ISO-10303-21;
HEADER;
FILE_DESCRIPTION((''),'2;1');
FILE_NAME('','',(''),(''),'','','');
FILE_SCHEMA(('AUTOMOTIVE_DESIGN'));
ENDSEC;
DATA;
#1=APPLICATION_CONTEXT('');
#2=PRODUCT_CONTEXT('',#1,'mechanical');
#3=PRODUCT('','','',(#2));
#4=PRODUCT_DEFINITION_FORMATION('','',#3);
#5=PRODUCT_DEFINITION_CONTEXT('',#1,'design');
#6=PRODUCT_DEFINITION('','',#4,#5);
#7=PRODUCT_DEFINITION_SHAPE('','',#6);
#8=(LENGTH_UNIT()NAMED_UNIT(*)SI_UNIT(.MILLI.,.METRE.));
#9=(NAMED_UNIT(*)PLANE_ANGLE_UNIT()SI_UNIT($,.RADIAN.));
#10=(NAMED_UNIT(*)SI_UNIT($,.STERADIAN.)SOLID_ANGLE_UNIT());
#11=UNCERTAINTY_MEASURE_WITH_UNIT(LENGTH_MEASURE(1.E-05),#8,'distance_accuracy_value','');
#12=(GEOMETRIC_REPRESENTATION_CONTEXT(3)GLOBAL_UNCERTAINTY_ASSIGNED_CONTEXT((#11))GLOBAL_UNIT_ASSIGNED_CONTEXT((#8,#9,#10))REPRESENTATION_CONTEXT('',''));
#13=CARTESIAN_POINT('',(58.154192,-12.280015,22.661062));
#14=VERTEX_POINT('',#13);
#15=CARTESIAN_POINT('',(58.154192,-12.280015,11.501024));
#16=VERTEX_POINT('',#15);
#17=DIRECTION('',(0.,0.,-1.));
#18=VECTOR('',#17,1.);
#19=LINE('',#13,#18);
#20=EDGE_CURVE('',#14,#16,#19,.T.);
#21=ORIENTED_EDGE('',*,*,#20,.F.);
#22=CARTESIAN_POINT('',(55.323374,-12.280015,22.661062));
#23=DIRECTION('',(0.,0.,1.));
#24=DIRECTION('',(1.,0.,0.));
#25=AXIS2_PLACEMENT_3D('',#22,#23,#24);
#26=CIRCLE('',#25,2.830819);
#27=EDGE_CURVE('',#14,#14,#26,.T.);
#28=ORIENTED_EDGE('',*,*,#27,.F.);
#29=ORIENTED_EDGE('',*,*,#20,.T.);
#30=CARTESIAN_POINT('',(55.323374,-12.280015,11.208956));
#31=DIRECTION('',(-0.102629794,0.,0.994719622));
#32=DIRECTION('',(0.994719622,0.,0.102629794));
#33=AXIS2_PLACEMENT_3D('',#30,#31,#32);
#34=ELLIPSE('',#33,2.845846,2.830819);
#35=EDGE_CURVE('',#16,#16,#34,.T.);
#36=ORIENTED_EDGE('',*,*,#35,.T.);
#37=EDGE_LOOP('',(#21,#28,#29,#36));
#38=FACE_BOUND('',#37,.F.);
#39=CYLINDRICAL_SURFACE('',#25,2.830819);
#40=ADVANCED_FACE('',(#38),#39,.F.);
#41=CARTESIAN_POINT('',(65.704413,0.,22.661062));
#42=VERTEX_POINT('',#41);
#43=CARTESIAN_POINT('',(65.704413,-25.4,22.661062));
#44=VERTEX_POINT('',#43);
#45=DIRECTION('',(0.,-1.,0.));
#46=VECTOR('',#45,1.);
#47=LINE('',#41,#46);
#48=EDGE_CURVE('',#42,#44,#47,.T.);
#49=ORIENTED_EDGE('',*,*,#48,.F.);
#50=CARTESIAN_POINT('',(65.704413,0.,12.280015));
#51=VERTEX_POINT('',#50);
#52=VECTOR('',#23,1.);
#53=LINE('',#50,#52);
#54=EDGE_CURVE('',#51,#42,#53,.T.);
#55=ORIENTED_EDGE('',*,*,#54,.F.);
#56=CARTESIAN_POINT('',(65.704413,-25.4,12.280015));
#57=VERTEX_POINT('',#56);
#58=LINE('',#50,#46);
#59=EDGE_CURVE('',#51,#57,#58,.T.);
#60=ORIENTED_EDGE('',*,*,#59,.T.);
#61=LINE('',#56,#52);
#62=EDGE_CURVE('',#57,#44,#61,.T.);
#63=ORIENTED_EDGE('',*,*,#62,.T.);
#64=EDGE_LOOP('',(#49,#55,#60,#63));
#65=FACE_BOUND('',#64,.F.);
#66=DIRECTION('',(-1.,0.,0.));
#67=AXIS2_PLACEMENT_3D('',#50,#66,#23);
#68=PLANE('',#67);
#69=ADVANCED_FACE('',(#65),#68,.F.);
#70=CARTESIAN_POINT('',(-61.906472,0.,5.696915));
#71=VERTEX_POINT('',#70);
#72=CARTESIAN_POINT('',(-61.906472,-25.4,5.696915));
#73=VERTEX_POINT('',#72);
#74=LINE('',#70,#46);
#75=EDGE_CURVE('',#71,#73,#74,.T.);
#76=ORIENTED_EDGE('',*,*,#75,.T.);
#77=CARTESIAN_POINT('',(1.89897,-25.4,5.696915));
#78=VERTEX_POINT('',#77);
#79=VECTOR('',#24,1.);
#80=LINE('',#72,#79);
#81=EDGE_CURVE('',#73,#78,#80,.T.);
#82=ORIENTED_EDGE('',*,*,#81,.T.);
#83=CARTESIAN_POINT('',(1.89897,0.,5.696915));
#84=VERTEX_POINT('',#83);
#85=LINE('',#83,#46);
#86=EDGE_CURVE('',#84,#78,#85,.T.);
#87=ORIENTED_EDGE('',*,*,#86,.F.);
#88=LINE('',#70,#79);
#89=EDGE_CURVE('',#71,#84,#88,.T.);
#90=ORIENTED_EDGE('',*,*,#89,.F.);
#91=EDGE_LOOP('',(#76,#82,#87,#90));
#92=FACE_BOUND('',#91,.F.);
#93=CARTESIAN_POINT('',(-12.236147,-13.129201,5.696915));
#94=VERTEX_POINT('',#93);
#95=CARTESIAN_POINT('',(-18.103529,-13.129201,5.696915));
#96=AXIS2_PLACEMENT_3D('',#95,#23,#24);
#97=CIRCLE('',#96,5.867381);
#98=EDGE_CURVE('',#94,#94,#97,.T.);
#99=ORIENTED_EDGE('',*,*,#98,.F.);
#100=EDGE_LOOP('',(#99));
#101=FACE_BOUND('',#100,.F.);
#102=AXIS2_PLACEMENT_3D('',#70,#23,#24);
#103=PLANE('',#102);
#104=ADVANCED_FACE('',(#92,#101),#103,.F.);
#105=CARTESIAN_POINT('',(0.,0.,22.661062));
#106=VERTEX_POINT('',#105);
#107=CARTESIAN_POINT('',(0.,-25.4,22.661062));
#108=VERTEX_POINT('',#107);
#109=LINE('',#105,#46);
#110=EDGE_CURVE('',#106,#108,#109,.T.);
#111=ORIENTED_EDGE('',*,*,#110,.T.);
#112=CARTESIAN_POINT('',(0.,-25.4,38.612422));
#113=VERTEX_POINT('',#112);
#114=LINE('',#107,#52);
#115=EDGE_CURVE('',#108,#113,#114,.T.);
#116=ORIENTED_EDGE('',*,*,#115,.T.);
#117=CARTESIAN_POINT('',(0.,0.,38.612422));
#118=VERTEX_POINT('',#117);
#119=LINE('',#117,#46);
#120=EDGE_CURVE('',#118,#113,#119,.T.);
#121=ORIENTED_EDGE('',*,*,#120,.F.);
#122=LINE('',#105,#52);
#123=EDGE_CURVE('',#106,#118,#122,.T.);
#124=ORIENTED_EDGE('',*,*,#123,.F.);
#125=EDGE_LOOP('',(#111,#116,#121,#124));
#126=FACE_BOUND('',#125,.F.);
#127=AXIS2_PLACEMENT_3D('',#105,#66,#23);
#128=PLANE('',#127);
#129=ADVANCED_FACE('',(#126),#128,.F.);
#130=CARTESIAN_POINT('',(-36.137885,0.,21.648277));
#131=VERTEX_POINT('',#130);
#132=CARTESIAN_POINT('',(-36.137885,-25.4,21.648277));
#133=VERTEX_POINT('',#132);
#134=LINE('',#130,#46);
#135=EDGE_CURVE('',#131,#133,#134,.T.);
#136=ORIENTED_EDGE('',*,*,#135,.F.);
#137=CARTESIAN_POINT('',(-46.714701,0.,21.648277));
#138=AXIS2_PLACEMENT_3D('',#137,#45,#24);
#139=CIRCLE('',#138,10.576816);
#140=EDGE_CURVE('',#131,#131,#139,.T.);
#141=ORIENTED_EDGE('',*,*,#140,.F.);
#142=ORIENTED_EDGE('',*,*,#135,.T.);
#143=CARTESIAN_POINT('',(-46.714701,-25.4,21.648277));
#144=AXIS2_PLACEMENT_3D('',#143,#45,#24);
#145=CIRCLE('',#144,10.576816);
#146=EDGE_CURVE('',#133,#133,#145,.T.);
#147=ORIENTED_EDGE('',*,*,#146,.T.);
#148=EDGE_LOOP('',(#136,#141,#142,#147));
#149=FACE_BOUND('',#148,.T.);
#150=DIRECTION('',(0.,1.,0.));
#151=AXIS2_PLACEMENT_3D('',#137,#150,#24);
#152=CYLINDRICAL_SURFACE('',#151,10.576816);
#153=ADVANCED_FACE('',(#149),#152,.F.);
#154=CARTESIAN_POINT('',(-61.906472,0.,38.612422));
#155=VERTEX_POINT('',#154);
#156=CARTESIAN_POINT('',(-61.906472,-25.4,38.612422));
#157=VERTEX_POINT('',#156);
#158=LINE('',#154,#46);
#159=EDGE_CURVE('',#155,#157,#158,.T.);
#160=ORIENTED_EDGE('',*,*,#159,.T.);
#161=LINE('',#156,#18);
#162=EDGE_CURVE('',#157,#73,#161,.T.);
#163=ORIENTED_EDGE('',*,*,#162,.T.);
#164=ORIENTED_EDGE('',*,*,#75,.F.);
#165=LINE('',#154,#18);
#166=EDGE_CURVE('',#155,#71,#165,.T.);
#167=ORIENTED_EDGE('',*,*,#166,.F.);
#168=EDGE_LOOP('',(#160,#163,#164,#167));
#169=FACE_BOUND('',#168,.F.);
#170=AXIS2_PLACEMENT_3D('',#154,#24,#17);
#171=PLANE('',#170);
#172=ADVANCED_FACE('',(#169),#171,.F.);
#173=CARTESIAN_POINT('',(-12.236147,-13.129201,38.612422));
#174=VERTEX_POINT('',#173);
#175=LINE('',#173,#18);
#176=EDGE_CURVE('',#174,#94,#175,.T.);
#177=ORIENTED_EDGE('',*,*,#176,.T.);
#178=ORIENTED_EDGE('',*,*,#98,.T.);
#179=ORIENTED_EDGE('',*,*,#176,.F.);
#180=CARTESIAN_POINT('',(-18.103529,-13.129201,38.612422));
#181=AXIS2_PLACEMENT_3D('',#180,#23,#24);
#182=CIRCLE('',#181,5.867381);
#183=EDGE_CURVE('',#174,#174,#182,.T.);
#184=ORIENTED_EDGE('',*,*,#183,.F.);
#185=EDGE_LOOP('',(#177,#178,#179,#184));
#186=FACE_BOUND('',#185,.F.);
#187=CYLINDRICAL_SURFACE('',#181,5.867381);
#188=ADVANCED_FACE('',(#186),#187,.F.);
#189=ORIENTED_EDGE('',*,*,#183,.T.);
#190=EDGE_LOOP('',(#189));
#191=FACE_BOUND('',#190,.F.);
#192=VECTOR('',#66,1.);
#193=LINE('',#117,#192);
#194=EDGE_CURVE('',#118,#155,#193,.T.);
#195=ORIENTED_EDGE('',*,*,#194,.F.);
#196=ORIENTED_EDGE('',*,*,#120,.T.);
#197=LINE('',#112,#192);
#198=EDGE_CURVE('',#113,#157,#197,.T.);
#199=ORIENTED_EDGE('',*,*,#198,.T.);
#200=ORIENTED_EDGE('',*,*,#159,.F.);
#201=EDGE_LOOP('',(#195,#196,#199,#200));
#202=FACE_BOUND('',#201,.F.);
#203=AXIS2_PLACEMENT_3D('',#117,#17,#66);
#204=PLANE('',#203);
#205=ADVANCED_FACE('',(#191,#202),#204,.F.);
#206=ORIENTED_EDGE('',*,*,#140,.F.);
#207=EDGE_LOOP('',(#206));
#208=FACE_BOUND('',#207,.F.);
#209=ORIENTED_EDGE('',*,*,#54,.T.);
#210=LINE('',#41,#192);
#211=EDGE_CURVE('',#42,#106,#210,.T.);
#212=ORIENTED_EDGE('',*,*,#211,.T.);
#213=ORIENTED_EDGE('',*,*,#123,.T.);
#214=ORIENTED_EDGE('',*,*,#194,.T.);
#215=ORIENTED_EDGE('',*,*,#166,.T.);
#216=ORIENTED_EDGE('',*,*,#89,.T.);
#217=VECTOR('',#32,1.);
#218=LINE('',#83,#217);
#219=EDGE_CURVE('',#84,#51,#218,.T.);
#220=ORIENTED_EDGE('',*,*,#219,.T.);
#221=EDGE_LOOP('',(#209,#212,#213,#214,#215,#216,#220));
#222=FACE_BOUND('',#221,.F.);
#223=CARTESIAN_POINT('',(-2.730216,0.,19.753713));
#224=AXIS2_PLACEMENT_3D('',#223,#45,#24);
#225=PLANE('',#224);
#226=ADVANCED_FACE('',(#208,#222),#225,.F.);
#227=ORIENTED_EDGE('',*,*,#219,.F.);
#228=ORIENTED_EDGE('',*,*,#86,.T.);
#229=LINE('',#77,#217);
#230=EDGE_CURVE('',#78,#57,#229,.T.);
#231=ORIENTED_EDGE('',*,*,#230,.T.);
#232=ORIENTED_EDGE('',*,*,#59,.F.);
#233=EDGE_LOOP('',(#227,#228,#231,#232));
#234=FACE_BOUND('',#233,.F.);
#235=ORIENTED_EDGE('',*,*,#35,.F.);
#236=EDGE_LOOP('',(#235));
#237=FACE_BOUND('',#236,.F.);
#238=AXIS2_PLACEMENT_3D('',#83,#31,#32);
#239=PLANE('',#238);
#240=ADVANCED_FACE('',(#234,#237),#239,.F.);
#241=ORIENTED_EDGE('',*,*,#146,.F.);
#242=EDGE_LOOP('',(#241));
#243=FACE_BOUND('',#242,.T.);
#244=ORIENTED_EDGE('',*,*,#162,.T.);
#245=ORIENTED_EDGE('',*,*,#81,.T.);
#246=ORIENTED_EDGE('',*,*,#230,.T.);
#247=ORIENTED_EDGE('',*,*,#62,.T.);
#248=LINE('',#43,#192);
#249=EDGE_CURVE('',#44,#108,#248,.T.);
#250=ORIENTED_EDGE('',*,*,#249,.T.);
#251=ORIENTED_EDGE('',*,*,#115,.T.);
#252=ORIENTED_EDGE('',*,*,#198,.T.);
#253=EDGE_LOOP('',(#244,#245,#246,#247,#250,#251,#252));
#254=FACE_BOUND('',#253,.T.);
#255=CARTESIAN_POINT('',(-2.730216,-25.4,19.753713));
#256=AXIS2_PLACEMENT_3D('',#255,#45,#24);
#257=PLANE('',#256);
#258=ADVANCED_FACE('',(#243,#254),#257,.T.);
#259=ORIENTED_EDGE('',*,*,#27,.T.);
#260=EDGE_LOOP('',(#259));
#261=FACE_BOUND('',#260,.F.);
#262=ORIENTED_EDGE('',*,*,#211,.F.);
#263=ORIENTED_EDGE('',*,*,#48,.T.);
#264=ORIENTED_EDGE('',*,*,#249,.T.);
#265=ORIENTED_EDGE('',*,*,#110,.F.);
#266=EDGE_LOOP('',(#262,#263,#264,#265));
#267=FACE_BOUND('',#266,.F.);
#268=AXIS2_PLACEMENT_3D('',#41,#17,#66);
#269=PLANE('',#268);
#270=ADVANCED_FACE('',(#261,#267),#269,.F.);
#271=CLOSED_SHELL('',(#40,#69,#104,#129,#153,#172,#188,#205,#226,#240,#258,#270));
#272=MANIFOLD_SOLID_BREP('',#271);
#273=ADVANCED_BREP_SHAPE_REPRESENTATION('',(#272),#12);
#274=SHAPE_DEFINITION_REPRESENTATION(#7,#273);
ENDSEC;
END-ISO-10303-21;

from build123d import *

# Parameters (mm, degrees)
F0_R     = 10.5768156475
F1_DEPTH = 25.4
F2_R     = 5.8673814398
F3_DEPTH = 32.9165069776
F5_R     = 2.8308188493
F6_DEPTH = 16.9651473331


# Not quite as in the source:
# - a feature names something its author has since deleted; it is built from what else it names


with BuildPart() as f1:
    # F0 (on Front) → F1 (new body)
    with BuildSketch(Plane.XZ):
        Polygon((0, 38.612421602), (-61.9064718485, 38.612421602), (-61.9064718485, 5.6969146244), (1.8989704549, 5.6969146244), (65.7044127584, 12.2800152749), (65.7044127584, 22.1546681132), (65.7044127584, 22.6610619575), (0, 22.6610619575), align=None)
        with Locations((-46.7147007585, 21.6482765973)):
            Circle(F0_R, mode=Mode.SUBTRACT)
    extrude(amount=F1_DEPTH)

    # F2 (on face) → F3 (cut, through all)
    with BuildSketch(Plane.XY.offset(38.612421602)):
        with Locations((-18.1035287678, -13.1292007864)):
            Circle(F2_R)
    extrude(amount=-F3_DEPTH, mode=Mode.SUBTRACT)

    # F5 (on face) → F6 (cut, through all)
    with BuildSketch(Plane.XY.offset(22.6610619575)):
        with Locations((55.3233735263, -12.2800152749)):
            Circle(F5_R)
    extrude(amount=-F6_DEPTH, mode=Mode.SUBTRACT)


solid = f1.part
